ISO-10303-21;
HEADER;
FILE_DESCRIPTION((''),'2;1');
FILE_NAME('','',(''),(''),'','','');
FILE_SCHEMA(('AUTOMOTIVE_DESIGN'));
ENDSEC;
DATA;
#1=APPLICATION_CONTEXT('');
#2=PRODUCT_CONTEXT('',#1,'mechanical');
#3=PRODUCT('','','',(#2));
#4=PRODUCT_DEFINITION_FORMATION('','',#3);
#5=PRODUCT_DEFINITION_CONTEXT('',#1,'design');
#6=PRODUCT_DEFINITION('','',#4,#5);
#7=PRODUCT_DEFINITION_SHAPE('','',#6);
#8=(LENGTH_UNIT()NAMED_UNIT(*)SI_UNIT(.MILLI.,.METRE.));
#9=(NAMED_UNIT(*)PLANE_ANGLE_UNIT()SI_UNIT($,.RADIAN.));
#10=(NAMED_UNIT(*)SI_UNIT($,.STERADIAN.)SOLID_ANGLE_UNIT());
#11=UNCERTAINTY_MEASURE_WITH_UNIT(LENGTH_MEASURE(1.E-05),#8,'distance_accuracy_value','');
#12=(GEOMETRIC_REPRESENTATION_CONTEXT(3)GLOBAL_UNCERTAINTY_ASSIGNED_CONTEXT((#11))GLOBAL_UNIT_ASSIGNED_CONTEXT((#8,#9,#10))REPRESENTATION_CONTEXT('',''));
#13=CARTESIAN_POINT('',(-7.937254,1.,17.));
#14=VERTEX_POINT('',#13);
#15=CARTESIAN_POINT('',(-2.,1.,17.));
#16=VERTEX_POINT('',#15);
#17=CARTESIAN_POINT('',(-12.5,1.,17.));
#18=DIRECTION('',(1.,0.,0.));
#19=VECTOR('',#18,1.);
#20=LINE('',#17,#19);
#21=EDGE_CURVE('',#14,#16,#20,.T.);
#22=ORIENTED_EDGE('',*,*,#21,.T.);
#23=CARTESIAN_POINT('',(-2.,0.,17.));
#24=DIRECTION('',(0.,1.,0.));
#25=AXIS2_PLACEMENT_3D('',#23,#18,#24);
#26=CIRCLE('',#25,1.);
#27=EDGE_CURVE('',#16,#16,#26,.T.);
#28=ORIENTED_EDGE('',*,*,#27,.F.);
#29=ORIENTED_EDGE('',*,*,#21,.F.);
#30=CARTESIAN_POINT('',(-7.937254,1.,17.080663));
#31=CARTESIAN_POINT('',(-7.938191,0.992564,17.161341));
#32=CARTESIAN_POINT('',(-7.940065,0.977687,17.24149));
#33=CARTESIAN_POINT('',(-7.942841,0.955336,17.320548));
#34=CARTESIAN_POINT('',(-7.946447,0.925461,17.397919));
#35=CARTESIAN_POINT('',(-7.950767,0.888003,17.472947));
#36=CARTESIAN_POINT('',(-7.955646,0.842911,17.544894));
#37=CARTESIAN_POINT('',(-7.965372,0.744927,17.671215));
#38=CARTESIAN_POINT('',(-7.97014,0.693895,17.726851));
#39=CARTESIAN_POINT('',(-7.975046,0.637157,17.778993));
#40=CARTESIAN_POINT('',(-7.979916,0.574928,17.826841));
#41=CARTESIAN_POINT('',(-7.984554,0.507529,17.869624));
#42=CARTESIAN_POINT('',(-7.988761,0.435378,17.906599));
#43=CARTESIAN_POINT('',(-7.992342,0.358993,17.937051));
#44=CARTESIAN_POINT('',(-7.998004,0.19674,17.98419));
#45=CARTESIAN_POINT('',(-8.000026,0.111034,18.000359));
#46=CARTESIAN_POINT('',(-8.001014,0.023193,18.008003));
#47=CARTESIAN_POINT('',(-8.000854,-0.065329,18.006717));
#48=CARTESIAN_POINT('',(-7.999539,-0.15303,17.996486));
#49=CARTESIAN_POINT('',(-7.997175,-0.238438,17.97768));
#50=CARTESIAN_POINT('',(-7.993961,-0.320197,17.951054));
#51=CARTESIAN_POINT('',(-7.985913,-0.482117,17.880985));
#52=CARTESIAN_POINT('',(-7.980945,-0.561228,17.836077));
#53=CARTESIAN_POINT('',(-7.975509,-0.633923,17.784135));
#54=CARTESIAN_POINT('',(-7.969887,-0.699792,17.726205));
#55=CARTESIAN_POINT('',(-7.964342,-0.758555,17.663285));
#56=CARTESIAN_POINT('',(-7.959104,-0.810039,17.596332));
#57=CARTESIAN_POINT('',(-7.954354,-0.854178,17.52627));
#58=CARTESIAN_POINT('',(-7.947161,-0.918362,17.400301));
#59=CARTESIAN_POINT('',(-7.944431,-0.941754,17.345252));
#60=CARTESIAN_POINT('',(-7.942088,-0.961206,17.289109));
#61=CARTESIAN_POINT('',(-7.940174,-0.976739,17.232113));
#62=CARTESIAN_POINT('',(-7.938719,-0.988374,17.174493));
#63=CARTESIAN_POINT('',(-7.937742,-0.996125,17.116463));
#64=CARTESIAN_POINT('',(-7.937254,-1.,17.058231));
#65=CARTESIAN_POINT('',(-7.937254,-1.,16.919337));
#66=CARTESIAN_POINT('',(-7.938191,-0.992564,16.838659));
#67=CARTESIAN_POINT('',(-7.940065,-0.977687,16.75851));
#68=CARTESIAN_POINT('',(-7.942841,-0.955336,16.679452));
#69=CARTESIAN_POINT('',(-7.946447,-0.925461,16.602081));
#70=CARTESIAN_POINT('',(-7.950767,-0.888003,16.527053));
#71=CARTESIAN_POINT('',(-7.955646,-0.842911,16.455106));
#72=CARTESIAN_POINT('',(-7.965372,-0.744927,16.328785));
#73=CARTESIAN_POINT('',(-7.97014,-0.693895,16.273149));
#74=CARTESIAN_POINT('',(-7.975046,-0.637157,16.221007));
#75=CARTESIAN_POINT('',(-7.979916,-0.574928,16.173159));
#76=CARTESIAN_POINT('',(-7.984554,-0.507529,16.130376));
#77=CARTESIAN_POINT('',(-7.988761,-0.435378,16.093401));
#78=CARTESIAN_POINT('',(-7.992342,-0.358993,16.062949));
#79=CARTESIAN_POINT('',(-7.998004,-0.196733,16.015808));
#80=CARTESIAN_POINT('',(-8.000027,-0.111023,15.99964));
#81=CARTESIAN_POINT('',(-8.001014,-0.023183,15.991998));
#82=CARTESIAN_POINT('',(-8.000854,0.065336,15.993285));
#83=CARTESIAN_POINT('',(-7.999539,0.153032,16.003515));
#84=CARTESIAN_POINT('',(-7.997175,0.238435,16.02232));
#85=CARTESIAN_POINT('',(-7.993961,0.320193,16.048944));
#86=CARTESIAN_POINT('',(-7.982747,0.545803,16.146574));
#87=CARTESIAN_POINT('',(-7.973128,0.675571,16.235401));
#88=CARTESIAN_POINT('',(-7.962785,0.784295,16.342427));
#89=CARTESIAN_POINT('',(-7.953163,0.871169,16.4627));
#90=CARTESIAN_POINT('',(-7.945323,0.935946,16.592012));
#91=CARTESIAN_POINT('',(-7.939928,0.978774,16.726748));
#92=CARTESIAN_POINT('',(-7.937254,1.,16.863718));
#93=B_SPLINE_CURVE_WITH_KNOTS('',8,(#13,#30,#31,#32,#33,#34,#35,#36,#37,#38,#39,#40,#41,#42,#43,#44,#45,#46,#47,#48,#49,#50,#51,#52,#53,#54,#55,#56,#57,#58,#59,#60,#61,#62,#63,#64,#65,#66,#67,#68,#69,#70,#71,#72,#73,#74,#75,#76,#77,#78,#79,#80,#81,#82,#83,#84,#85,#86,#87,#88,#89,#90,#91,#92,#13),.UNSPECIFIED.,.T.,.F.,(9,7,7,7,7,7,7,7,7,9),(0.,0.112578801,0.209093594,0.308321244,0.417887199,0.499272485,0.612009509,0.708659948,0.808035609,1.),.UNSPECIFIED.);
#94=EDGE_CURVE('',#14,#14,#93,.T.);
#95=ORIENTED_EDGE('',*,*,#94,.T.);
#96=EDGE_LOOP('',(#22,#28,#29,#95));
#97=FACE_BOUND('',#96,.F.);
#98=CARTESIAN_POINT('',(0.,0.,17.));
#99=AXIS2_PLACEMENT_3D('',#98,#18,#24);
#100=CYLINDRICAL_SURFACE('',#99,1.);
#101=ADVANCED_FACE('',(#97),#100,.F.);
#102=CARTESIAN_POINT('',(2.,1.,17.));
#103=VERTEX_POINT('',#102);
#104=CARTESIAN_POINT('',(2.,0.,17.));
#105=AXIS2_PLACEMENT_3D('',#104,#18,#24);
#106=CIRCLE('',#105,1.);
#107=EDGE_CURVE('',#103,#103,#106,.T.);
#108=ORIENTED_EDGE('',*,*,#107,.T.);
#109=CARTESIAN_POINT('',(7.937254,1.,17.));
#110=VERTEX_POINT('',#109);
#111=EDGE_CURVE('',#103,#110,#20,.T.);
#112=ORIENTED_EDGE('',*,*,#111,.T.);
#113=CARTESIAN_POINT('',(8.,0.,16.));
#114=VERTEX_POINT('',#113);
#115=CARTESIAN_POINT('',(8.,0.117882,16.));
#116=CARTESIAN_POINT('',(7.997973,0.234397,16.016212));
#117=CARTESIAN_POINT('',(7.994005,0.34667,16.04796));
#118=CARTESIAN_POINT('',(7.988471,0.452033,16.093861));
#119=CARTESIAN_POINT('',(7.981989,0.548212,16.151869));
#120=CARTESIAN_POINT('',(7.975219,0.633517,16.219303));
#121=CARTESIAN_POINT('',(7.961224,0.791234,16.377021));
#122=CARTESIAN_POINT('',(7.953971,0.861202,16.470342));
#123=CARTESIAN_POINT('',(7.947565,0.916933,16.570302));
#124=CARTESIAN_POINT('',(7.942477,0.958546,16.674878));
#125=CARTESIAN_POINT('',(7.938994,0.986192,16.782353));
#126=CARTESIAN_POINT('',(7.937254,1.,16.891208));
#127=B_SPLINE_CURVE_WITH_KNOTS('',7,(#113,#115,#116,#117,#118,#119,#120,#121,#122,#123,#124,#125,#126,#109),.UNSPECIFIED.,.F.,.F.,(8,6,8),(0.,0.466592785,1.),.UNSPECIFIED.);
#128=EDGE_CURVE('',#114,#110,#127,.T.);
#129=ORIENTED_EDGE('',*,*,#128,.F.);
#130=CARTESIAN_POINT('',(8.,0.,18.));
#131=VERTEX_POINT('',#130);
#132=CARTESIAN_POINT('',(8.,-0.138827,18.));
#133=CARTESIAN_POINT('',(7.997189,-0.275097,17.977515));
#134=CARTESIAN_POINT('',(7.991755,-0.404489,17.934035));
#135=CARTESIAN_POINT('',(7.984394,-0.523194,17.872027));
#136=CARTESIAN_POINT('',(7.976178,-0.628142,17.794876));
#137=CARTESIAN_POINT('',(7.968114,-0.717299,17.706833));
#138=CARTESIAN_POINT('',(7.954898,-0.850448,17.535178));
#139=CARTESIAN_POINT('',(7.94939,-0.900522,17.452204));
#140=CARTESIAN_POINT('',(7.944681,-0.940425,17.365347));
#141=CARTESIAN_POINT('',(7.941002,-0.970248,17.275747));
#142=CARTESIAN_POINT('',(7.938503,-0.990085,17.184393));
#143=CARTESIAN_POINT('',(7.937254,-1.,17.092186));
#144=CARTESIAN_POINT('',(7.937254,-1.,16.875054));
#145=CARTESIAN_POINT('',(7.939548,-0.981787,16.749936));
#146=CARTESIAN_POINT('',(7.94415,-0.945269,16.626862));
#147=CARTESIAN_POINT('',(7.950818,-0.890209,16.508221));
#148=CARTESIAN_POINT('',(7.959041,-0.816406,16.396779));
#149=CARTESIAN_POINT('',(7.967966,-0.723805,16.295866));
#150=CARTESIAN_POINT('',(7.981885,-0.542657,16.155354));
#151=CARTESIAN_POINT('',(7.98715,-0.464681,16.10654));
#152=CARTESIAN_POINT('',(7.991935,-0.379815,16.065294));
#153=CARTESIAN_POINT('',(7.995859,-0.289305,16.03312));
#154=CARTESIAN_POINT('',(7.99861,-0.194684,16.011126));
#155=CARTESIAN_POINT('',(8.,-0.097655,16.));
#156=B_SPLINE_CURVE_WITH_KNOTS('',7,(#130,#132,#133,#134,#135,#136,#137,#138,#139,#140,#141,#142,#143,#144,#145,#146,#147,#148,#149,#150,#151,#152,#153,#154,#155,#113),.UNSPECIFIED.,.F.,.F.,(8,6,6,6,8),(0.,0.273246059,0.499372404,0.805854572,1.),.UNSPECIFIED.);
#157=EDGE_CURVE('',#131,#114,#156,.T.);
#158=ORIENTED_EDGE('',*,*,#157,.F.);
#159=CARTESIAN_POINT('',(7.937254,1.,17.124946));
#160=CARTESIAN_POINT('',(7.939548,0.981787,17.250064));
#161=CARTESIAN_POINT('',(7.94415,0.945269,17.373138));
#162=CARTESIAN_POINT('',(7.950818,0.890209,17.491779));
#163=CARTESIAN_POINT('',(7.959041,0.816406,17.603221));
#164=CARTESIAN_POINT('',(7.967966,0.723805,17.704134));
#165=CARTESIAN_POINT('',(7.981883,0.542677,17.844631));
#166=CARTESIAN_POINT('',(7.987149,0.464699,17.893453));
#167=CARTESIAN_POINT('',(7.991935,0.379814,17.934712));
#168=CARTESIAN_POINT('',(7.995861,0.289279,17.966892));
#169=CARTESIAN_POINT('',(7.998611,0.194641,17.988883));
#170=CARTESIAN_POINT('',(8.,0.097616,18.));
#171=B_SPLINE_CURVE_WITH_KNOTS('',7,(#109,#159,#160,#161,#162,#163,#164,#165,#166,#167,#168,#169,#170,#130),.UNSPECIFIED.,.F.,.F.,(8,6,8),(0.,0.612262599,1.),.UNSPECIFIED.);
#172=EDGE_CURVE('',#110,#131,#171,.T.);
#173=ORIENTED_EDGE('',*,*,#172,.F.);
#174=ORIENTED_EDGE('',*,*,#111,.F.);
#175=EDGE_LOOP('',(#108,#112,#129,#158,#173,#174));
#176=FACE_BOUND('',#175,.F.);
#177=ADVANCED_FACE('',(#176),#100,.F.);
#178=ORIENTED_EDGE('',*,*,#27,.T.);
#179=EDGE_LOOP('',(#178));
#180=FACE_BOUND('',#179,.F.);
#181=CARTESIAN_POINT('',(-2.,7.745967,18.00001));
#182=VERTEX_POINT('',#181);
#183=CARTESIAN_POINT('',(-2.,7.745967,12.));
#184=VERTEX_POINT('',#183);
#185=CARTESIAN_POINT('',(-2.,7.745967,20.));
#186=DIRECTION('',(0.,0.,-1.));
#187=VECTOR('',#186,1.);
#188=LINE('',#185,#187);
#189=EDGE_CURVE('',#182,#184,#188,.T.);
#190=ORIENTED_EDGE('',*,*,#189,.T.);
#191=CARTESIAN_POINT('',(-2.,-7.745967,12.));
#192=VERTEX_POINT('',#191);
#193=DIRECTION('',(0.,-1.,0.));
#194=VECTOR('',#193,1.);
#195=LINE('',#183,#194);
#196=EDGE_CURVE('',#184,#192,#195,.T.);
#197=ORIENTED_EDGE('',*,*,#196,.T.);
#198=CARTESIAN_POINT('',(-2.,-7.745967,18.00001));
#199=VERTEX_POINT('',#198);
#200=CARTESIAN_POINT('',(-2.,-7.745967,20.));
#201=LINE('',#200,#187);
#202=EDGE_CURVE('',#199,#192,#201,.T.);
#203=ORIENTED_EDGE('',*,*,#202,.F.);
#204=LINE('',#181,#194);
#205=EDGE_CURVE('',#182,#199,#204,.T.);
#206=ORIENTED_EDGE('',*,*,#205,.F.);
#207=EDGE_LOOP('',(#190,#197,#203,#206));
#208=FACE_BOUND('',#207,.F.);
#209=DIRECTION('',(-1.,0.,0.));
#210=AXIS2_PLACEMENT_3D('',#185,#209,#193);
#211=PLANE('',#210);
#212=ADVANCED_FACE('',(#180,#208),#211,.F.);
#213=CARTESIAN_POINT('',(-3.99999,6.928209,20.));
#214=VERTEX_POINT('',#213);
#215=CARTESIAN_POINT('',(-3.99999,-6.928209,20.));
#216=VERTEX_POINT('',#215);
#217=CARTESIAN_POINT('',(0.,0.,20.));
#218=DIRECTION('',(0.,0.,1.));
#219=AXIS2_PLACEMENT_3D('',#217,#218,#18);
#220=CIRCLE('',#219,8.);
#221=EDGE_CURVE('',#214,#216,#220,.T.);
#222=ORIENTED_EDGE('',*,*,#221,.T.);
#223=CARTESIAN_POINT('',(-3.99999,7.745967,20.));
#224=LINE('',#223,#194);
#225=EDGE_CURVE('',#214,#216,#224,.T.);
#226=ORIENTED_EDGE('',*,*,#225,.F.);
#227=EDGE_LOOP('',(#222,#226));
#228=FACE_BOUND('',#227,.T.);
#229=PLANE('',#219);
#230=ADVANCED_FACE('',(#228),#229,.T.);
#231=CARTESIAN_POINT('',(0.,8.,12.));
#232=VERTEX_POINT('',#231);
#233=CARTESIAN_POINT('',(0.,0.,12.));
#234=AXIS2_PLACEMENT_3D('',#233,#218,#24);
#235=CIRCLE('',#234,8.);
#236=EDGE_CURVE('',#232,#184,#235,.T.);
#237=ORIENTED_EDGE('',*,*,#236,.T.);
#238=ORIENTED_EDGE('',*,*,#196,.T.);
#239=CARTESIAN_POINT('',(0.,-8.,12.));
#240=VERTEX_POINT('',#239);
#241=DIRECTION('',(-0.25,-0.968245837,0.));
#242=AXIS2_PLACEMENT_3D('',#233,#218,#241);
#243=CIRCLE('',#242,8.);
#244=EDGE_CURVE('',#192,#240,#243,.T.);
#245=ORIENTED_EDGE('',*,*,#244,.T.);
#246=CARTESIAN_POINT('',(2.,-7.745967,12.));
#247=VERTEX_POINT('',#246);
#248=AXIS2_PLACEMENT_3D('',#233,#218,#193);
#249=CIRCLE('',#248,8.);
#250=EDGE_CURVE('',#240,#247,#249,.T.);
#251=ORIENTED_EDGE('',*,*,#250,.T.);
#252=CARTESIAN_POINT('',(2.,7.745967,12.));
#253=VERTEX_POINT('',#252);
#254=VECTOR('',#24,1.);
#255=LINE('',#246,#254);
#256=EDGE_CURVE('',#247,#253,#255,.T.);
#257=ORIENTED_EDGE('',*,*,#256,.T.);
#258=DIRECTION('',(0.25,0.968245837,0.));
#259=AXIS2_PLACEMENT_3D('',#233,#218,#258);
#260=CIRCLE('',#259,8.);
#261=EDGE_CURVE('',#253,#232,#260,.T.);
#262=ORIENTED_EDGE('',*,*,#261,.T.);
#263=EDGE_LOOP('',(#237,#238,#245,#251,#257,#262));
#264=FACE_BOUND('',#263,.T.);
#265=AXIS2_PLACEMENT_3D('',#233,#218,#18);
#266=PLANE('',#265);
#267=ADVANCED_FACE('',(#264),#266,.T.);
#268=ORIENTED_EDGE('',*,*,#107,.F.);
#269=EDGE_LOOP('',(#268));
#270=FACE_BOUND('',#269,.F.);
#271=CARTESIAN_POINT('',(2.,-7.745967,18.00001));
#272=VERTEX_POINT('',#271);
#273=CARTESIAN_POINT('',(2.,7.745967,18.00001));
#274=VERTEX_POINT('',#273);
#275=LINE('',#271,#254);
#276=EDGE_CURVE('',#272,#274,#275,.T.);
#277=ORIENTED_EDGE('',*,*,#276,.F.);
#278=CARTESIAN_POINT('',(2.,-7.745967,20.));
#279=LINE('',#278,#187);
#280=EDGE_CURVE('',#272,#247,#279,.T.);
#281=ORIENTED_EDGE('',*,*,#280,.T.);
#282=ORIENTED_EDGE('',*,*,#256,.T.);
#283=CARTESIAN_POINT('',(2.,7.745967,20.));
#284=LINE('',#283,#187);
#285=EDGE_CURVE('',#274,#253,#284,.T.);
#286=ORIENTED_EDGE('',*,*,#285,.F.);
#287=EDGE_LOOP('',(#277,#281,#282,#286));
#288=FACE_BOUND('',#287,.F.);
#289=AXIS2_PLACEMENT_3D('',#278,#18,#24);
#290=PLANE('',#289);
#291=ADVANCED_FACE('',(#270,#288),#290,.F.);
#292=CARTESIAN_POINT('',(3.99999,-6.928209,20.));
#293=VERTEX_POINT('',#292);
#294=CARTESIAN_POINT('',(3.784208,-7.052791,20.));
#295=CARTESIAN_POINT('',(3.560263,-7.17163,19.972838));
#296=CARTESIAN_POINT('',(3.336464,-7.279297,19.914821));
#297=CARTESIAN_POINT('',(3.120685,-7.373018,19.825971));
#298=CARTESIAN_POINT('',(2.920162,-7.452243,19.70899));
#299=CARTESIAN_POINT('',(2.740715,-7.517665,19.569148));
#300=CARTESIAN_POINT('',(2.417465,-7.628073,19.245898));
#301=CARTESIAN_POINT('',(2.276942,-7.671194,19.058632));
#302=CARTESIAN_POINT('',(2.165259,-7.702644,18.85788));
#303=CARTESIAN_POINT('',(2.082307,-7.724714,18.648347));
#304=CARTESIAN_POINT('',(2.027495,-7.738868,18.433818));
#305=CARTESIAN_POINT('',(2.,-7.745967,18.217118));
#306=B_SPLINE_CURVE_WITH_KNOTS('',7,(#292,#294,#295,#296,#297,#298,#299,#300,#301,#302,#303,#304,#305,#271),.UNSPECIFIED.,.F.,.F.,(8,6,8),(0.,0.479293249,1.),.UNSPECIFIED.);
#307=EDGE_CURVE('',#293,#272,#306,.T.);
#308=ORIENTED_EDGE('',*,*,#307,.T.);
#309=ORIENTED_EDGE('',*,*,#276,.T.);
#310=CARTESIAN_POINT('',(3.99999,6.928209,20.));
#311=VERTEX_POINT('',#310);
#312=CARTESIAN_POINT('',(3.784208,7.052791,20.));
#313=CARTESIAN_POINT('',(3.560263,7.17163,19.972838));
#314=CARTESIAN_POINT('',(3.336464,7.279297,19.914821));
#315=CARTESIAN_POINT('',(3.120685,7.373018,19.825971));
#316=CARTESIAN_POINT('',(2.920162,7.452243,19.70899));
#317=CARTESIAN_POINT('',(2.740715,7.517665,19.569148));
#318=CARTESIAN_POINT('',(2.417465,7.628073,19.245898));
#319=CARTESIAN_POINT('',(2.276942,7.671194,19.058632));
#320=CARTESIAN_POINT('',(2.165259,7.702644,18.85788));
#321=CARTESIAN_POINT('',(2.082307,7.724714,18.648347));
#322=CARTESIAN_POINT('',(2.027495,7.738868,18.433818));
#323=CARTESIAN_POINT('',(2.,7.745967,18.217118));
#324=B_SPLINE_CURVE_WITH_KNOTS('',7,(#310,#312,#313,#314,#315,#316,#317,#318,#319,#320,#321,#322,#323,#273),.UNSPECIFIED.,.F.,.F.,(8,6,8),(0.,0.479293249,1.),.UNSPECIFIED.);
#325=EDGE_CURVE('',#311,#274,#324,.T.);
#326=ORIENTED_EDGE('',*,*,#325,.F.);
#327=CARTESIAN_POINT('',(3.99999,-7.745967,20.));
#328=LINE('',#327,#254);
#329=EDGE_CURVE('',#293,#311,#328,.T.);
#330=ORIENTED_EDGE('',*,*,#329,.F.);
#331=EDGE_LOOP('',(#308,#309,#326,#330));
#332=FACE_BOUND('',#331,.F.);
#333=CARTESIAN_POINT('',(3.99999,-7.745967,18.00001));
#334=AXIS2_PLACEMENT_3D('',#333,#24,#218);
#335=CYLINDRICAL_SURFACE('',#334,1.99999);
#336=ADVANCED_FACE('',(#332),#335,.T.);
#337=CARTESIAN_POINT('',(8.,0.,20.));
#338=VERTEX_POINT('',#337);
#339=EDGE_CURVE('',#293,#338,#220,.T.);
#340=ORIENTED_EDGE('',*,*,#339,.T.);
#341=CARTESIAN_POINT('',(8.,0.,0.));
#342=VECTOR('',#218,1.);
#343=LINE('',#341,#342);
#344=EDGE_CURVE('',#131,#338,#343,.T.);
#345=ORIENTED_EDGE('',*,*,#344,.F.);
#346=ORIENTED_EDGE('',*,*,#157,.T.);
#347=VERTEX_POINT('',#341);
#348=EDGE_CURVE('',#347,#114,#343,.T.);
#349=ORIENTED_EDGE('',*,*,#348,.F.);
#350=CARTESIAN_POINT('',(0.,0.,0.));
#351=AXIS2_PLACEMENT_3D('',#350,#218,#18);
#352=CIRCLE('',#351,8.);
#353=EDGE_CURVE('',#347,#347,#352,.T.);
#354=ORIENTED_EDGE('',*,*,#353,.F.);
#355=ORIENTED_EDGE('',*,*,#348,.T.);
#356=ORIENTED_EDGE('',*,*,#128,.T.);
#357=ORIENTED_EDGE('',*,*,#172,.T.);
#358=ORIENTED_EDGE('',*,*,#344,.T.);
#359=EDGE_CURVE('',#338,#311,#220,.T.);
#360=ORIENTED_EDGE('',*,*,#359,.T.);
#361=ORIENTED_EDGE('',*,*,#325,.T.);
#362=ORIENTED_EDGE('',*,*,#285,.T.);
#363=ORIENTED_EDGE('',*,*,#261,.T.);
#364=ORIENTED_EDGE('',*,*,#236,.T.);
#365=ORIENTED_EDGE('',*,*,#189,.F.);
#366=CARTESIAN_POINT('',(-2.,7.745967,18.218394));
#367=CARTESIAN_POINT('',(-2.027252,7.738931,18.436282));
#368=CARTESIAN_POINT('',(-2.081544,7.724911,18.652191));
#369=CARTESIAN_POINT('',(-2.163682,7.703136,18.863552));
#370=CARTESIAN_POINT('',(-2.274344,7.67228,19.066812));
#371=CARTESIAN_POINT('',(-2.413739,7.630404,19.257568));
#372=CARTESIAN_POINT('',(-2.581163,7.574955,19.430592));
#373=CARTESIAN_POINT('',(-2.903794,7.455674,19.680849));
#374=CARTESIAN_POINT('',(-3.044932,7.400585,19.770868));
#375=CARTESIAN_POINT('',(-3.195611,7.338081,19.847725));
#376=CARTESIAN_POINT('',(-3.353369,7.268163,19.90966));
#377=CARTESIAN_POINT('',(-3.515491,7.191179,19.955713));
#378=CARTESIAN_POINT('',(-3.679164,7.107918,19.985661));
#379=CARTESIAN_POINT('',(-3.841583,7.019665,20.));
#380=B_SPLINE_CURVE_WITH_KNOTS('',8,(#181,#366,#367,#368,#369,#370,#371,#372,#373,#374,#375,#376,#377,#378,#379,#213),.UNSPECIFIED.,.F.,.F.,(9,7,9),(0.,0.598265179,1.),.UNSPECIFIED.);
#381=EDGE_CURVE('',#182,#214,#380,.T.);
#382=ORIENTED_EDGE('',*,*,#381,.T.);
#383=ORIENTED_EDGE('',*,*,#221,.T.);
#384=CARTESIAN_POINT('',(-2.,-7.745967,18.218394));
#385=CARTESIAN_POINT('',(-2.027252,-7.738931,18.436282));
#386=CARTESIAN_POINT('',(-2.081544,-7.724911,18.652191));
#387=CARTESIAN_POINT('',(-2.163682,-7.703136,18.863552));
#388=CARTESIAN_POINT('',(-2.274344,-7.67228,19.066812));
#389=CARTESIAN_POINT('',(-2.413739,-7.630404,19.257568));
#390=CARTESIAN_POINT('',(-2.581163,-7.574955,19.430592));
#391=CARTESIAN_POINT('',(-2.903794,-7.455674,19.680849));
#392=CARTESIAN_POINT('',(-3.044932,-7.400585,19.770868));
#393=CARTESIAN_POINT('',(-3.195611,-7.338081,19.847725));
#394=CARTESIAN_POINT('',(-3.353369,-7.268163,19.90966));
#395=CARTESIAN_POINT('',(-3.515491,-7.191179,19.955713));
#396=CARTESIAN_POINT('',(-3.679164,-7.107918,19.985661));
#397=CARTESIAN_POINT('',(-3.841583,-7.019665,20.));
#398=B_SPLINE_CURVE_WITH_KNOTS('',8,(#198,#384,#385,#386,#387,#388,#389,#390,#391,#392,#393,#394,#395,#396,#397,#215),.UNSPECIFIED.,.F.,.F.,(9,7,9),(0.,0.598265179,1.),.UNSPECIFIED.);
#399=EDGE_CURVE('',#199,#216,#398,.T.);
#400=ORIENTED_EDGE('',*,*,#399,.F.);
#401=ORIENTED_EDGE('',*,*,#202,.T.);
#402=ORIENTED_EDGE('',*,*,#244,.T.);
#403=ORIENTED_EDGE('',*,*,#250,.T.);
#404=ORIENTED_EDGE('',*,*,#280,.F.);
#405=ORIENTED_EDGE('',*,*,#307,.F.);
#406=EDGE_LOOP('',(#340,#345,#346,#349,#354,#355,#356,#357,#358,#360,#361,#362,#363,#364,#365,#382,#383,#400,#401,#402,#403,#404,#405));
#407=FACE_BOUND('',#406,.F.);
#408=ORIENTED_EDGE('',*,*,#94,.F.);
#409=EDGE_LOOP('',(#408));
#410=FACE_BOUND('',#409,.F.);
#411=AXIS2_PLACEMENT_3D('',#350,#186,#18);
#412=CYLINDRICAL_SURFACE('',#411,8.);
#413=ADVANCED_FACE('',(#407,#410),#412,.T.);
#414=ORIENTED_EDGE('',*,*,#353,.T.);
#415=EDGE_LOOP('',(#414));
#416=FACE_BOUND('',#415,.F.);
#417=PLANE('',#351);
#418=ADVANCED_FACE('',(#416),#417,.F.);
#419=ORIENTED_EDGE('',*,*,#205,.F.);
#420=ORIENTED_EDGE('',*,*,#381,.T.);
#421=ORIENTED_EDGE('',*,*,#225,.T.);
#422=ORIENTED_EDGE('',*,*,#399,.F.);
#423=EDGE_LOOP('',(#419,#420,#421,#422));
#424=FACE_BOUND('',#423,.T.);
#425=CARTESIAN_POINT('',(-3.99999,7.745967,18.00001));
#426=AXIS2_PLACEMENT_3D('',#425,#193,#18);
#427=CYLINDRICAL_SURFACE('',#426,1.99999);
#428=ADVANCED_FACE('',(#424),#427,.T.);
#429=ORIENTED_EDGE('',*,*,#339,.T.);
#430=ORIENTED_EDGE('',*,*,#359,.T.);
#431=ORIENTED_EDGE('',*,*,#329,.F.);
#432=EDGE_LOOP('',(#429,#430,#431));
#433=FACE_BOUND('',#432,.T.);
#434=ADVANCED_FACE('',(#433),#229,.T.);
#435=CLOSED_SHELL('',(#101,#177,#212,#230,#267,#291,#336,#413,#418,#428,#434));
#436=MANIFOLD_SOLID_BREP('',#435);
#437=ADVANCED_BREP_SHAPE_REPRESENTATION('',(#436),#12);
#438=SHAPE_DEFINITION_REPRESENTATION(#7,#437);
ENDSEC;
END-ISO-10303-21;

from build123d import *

# Parameters (mm, degrees)
F0_R     = 8
F1_DEPTH = 20
F3_DEPTH = 8
F4_R     = 1
F5_DEPTH = 12.5
F6_R     = 1.99999


# Not quite as in the source:
# - a fillet or chamfer is up to 0.001 mm smaller than in the source, because OpenCascade refuses the exact size


with BuildPart() as f1:
    # F0 (on Top) → F1 (new body)
    with BuildSketch(Plane.XY):
        Circle(F0_R)
    extrude(amount=F1_DEPTH)

    # F2 (on face) → F3 (cut)
    with BuildSketch(Plane.XY.offset(20)):
        with BuildLine():
            ThreePointArc((2, 7.7459666924), (1.0080343399, 7.9362375701), (0, 8))
            ThreePointArc((0, 8), (-1.0080343399, 7.9362375701), (-2, 7.7459666924))
            Line((-2, 7.7459666924), (-2, -7.7459666924))
            ThreePointArc((-2, -7.7459666924), (-1.0080343399, -7.9362375701), (0, -8))
            ThreePointArc((0, -8), (1.0080343399, -7.9362375701), (2, -7.7459666924))
            Line((2, -7.7459666924), (2, 7.7459666924))
        make_face()
    extrude(amount=-F3_DEPTH, mode=Mode.SUBTRACT)

    # F4 (on Right) → F5 (cut, symmetric)
    with BuildSketch(Plane.YZ):
        with Locations((0, 17)):
            Circle(F4_R)
    extrude(amount=F5_DEPTH, both=True, mode=Mode.SUBTRACT)

    # F6 (radius 2 in the source; OpenCascade refuses exactly that, so slightly less here)
    f6_edges = [f1.edges().sort_by_distance(p)[0] for p in [
        (-2, 0, 20),
        (2, 0, 20),
    ]]
    fillet(f6_edges, radius=F6_R)


solid = f1.part
